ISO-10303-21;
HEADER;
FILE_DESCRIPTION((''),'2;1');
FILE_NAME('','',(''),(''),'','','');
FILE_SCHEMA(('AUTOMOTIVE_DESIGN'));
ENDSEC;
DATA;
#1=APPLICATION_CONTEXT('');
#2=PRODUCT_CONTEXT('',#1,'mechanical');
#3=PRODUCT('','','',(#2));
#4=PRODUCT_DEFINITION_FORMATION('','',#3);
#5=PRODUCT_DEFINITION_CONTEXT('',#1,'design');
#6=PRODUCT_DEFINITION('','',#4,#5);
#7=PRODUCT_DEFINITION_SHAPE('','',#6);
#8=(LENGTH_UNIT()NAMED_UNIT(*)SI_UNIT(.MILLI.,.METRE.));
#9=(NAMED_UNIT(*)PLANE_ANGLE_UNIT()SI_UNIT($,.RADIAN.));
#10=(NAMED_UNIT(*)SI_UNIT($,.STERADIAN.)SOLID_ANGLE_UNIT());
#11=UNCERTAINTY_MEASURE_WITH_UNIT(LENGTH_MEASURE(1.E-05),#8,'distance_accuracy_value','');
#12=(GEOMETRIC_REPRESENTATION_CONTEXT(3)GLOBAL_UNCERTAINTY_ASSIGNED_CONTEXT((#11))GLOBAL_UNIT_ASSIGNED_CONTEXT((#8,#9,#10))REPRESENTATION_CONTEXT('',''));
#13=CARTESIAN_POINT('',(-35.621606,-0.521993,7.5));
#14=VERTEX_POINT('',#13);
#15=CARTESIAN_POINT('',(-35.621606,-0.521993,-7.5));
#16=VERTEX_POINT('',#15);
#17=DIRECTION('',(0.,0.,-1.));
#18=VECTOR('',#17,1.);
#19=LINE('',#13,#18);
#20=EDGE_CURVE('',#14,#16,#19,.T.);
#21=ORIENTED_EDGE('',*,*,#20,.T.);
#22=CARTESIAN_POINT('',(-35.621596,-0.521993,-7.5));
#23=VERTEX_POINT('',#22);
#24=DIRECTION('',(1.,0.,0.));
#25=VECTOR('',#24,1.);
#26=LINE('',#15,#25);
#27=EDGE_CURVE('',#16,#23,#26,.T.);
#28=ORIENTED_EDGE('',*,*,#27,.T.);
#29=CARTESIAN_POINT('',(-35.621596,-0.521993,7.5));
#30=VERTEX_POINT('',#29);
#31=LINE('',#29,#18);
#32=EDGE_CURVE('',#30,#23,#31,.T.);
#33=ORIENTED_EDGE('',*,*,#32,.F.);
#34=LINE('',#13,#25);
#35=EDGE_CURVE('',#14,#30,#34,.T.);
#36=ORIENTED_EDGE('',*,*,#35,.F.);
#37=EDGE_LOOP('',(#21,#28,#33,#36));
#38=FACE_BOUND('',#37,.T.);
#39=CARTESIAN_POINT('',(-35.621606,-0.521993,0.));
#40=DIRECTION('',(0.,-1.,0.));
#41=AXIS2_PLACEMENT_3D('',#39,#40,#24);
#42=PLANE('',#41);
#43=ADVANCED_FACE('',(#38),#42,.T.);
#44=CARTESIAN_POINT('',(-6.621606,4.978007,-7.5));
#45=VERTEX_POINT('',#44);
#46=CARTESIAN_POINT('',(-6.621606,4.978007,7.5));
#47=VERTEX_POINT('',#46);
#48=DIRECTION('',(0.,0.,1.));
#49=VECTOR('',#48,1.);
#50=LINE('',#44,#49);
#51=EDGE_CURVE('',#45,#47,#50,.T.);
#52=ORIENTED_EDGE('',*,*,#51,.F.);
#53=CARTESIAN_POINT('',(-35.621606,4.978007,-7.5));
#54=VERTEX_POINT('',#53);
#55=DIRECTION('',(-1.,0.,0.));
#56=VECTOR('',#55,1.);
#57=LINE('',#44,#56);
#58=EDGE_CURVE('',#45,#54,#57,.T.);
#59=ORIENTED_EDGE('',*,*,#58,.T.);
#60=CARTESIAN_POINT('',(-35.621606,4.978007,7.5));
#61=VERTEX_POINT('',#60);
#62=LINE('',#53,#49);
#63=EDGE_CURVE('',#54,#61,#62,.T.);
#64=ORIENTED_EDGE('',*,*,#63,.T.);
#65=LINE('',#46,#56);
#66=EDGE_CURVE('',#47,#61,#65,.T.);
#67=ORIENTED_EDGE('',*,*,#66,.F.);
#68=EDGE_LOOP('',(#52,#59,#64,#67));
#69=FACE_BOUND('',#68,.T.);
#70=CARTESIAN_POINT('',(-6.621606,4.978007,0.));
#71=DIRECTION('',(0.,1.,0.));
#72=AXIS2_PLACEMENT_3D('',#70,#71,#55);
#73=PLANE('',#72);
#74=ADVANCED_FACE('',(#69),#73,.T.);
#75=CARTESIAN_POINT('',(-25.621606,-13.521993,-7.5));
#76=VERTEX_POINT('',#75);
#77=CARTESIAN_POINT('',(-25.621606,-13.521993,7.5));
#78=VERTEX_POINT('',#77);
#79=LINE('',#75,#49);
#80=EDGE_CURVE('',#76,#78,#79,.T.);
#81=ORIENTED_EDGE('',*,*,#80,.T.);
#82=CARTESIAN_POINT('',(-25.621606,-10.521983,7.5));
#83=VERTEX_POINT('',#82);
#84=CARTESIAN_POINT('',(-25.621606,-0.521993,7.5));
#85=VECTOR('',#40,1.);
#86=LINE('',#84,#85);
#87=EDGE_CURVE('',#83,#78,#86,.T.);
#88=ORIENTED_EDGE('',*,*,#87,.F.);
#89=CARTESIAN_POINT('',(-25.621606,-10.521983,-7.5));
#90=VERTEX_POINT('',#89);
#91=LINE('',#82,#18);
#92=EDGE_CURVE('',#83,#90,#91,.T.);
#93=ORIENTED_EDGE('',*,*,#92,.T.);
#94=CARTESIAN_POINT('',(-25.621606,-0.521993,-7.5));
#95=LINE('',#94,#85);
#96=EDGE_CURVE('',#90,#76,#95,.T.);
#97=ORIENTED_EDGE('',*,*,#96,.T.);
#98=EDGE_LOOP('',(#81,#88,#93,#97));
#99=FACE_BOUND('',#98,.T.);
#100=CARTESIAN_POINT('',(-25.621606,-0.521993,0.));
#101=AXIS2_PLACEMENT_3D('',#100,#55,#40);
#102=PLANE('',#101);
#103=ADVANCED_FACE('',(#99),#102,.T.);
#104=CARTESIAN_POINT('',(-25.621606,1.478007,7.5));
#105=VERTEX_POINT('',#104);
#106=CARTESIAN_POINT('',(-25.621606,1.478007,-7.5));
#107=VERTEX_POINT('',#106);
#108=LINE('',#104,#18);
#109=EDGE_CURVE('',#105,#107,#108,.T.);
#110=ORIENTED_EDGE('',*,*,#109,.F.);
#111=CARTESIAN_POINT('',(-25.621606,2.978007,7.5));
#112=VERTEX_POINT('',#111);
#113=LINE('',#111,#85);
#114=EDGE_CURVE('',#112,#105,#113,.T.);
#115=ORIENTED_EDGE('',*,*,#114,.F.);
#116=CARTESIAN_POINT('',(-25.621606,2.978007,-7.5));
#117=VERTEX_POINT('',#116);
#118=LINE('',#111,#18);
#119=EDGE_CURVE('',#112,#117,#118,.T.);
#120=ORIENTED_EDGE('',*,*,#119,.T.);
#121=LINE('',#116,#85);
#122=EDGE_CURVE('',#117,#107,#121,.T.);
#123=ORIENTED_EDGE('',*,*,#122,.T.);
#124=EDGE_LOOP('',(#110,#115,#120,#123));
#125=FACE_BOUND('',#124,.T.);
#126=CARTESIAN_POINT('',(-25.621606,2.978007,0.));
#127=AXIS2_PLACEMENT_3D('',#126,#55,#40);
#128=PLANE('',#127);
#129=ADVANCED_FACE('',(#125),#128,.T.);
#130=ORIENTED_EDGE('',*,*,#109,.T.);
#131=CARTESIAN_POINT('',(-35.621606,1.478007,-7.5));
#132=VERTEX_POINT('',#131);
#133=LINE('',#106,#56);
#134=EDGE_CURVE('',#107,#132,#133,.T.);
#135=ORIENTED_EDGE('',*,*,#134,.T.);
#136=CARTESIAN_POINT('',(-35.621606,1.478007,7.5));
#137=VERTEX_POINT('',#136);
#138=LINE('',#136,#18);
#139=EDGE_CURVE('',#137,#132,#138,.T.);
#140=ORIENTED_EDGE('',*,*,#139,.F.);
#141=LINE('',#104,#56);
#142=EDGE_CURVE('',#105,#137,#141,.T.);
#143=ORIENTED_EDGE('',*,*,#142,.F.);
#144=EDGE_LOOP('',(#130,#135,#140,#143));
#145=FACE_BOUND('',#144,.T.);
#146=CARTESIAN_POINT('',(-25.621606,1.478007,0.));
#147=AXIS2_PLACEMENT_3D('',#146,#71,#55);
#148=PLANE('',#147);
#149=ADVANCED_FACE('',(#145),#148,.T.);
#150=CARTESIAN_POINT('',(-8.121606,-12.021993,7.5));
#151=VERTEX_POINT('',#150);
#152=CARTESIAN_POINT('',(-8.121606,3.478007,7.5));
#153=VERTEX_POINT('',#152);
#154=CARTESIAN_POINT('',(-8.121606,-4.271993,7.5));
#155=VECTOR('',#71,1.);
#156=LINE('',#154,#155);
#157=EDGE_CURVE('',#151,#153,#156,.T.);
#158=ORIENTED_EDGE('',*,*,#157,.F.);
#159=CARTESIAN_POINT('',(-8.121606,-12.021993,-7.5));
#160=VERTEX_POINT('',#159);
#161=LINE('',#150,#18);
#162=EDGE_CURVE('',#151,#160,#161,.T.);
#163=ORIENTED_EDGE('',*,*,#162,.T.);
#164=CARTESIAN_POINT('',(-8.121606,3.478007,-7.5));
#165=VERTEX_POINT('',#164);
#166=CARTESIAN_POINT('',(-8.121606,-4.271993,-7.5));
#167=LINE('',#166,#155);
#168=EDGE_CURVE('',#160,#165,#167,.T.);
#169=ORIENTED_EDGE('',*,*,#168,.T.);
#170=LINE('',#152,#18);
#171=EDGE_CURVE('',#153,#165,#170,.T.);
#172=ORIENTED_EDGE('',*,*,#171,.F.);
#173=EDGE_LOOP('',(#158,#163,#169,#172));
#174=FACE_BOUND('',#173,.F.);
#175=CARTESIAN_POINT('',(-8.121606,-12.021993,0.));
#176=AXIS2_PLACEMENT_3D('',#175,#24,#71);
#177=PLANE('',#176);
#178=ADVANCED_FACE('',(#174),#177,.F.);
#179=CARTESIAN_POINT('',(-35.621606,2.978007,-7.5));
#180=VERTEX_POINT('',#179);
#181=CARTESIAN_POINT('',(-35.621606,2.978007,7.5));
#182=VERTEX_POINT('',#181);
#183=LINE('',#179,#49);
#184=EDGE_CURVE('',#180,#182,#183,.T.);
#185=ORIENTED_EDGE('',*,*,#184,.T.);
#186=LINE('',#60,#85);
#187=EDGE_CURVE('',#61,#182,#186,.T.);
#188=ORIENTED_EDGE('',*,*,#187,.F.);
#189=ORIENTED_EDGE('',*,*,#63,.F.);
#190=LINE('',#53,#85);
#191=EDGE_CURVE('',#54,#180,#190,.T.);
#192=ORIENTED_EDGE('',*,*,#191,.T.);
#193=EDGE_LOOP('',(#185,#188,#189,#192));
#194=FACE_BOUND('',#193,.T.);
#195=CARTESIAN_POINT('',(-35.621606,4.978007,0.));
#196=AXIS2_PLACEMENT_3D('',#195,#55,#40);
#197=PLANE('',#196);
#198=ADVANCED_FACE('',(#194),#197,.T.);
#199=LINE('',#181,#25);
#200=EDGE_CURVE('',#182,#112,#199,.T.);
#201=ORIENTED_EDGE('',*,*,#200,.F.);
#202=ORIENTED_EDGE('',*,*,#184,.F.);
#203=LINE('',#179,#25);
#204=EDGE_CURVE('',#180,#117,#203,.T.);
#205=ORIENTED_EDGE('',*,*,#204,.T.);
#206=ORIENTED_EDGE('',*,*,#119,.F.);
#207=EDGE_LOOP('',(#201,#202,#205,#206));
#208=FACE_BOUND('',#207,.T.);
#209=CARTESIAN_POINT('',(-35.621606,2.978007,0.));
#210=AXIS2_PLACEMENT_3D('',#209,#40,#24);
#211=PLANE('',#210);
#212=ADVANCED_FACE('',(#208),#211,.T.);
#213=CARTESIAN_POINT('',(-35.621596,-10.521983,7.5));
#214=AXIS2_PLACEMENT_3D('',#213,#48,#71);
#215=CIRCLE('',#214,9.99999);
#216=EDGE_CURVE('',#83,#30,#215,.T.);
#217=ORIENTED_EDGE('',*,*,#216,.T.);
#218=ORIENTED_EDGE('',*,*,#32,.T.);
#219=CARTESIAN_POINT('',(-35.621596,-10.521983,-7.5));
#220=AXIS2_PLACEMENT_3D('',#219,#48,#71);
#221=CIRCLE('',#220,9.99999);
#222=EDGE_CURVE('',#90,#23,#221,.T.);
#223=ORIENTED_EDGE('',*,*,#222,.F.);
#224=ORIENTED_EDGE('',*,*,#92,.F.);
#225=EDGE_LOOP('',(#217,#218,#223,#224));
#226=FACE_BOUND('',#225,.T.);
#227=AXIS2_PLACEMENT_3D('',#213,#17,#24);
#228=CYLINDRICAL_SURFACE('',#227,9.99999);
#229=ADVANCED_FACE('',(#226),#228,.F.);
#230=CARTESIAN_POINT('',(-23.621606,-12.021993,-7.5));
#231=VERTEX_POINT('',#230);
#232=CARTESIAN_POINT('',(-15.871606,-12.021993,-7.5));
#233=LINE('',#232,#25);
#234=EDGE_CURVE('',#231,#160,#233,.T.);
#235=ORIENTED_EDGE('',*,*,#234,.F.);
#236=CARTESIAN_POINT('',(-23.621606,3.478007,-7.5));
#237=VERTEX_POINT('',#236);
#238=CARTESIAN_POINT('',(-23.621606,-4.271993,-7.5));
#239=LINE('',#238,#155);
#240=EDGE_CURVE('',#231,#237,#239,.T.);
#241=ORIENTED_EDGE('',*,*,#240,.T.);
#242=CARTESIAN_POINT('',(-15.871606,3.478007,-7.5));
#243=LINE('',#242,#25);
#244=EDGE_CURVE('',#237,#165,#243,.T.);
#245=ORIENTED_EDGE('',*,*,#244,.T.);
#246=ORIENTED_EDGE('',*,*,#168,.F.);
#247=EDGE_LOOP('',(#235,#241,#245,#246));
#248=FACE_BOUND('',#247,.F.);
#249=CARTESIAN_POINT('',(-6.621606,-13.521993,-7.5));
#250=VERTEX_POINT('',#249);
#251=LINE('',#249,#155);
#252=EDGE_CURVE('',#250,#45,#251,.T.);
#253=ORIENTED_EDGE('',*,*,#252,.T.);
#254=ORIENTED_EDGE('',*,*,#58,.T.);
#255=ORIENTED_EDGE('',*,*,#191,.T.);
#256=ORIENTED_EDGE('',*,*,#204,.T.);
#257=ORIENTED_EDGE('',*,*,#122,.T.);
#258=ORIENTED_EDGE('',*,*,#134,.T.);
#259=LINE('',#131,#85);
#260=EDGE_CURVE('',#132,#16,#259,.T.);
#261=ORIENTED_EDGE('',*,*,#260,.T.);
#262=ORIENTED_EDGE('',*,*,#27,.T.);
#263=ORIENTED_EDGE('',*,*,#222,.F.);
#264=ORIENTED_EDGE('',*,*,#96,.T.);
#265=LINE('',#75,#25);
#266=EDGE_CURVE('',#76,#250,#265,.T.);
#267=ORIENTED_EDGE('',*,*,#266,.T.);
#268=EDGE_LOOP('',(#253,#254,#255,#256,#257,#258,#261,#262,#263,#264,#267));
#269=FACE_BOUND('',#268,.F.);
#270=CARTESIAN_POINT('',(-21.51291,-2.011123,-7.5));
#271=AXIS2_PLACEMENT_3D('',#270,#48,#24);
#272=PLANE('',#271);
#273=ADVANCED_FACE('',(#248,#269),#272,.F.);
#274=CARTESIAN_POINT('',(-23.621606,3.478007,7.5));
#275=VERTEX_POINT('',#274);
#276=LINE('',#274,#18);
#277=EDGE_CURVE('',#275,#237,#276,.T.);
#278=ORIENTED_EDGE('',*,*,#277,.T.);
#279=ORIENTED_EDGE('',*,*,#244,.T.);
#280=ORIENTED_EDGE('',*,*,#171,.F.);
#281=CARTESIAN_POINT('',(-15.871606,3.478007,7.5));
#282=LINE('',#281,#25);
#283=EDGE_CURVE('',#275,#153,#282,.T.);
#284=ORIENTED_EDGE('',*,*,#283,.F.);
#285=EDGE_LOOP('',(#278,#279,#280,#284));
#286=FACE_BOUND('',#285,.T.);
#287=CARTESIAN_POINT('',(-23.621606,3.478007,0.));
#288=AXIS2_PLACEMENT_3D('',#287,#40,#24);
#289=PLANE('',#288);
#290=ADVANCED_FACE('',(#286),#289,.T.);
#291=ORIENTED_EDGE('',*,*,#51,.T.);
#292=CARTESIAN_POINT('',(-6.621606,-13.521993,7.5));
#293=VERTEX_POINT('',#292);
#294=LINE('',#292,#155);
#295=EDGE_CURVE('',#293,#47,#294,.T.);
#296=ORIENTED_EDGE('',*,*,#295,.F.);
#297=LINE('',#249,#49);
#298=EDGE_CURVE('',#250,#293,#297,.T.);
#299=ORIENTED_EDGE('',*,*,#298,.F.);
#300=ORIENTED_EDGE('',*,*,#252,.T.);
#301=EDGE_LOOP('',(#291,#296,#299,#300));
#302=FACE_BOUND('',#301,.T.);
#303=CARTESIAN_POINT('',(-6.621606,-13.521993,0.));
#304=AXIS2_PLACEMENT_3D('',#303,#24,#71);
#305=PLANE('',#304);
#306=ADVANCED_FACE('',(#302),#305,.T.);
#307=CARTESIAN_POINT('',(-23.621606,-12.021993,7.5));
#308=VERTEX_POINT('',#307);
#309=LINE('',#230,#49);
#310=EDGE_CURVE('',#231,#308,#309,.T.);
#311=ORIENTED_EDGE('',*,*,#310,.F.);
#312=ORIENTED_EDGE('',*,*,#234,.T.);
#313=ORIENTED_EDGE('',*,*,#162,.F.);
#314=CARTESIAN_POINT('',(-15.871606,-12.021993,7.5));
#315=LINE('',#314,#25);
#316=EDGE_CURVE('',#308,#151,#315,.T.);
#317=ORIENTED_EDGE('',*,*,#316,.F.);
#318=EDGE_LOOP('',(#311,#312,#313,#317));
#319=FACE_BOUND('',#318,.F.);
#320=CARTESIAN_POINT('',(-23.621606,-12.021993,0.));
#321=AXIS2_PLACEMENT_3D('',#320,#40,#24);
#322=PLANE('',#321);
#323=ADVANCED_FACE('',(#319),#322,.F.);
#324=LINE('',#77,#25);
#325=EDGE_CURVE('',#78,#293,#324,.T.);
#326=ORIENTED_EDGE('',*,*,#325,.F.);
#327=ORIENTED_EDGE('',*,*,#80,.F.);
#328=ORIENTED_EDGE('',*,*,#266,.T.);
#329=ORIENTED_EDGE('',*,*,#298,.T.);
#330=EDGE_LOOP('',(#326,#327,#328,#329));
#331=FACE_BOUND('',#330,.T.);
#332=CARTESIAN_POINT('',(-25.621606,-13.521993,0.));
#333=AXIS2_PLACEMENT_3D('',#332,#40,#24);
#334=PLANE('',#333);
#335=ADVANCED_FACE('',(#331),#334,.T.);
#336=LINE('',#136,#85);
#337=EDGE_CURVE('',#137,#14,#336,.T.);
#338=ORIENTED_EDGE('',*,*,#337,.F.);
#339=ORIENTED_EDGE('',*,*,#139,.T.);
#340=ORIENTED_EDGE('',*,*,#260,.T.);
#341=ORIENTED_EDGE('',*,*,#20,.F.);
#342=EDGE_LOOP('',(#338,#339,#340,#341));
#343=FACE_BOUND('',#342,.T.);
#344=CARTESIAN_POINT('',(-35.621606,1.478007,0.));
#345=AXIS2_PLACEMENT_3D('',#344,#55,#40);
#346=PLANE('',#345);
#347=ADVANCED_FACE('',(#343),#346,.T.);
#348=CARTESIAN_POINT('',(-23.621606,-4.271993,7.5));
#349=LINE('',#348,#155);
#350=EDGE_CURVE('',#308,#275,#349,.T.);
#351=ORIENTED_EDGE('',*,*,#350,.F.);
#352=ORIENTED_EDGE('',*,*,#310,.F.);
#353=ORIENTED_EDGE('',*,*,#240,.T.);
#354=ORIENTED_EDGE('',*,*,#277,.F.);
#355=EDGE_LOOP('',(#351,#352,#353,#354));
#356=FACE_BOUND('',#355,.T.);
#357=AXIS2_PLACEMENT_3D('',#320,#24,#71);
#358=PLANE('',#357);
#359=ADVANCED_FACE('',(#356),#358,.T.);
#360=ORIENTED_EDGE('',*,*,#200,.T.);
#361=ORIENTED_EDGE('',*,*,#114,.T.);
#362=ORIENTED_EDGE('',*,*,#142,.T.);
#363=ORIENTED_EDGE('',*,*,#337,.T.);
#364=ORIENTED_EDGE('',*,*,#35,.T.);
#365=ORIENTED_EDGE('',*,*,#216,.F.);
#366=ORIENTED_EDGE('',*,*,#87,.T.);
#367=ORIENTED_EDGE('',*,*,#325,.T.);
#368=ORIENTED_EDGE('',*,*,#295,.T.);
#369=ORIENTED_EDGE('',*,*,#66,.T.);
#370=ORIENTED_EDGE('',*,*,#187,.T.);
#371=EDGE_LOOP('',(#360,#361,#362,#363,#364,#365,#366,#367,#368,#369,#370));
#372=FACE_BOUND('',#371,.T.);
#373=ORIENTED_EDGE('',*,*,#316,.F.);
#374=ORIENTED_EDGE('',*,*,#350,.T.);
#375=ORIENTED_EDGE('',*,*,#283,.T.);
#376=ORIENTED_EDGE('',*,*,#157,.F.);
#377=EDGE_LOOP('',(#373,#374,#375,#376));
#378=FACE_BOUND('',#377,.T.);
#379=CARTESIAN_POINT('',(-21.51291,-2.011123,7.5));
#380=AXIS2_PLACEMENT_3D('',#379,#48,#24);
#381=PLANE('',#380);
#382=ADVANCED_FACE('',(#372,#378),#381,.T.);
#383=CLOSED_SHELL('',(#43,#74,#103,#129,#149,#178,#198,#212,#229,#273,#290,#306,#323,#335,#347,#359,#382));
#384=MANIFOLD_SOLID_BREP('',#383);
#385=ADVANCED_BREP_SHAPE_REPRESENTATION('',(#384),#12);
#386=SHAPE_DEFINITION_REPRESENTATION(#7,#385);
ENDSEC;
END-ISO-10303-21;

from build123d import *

# Parameters (mm, degrees)
F0_W     = 15.5
F0_H     = 15.5
F1_DEPTH = 7.5
F2_R     = 9.99999


# Not quite as in the source:
# - a fillet or chamfer is up to 0.001 mm smaller than in the source, because OpenCascade refuses the exact size
# - a feature names something its author has since deleted; it is built from what else it names


with BuildPart() as f1:
    # F0 (on Top) → F1 (new body, symmetric)
    with BuildSketch(Plane.XY):
        Polygon((-25.621605996, -0.5219928448), (-25.621605996, -7.0219928448), (-25.621605996, -13.5219928448), (-6.621605996, -13.5219928448), (-6.621605996, -8.299067306), (-6.621605996, 4.9780071552), (-35.621605996, 4.9780071552), (-35.621605996, 2.9780071552), (-25.621605996, 2.9780071552), (-25.621605996, 1.4780071552), (-35.621605996, 1.4780071552), (-35.621605996, -0.5219928448), align=None)
        with Locations((-15.871605996, -4.2719928448)):
            Rectangle(F0_W, F0_H, mode=Mode.SUBTRACT)
    extrude(amount=F1_DEPTH, both=True)

    # F2 (radius 10 in the source; OpenCascade refuses exactly that, so slightly less here)
    f2_edges = [f1.edges().sort_by_distance(p)[0] for p in [
        (-25.621606, -0.521993, 0),
    ]]
    fillet(f2_edges, radius=F2_R)


solid = f1.part
